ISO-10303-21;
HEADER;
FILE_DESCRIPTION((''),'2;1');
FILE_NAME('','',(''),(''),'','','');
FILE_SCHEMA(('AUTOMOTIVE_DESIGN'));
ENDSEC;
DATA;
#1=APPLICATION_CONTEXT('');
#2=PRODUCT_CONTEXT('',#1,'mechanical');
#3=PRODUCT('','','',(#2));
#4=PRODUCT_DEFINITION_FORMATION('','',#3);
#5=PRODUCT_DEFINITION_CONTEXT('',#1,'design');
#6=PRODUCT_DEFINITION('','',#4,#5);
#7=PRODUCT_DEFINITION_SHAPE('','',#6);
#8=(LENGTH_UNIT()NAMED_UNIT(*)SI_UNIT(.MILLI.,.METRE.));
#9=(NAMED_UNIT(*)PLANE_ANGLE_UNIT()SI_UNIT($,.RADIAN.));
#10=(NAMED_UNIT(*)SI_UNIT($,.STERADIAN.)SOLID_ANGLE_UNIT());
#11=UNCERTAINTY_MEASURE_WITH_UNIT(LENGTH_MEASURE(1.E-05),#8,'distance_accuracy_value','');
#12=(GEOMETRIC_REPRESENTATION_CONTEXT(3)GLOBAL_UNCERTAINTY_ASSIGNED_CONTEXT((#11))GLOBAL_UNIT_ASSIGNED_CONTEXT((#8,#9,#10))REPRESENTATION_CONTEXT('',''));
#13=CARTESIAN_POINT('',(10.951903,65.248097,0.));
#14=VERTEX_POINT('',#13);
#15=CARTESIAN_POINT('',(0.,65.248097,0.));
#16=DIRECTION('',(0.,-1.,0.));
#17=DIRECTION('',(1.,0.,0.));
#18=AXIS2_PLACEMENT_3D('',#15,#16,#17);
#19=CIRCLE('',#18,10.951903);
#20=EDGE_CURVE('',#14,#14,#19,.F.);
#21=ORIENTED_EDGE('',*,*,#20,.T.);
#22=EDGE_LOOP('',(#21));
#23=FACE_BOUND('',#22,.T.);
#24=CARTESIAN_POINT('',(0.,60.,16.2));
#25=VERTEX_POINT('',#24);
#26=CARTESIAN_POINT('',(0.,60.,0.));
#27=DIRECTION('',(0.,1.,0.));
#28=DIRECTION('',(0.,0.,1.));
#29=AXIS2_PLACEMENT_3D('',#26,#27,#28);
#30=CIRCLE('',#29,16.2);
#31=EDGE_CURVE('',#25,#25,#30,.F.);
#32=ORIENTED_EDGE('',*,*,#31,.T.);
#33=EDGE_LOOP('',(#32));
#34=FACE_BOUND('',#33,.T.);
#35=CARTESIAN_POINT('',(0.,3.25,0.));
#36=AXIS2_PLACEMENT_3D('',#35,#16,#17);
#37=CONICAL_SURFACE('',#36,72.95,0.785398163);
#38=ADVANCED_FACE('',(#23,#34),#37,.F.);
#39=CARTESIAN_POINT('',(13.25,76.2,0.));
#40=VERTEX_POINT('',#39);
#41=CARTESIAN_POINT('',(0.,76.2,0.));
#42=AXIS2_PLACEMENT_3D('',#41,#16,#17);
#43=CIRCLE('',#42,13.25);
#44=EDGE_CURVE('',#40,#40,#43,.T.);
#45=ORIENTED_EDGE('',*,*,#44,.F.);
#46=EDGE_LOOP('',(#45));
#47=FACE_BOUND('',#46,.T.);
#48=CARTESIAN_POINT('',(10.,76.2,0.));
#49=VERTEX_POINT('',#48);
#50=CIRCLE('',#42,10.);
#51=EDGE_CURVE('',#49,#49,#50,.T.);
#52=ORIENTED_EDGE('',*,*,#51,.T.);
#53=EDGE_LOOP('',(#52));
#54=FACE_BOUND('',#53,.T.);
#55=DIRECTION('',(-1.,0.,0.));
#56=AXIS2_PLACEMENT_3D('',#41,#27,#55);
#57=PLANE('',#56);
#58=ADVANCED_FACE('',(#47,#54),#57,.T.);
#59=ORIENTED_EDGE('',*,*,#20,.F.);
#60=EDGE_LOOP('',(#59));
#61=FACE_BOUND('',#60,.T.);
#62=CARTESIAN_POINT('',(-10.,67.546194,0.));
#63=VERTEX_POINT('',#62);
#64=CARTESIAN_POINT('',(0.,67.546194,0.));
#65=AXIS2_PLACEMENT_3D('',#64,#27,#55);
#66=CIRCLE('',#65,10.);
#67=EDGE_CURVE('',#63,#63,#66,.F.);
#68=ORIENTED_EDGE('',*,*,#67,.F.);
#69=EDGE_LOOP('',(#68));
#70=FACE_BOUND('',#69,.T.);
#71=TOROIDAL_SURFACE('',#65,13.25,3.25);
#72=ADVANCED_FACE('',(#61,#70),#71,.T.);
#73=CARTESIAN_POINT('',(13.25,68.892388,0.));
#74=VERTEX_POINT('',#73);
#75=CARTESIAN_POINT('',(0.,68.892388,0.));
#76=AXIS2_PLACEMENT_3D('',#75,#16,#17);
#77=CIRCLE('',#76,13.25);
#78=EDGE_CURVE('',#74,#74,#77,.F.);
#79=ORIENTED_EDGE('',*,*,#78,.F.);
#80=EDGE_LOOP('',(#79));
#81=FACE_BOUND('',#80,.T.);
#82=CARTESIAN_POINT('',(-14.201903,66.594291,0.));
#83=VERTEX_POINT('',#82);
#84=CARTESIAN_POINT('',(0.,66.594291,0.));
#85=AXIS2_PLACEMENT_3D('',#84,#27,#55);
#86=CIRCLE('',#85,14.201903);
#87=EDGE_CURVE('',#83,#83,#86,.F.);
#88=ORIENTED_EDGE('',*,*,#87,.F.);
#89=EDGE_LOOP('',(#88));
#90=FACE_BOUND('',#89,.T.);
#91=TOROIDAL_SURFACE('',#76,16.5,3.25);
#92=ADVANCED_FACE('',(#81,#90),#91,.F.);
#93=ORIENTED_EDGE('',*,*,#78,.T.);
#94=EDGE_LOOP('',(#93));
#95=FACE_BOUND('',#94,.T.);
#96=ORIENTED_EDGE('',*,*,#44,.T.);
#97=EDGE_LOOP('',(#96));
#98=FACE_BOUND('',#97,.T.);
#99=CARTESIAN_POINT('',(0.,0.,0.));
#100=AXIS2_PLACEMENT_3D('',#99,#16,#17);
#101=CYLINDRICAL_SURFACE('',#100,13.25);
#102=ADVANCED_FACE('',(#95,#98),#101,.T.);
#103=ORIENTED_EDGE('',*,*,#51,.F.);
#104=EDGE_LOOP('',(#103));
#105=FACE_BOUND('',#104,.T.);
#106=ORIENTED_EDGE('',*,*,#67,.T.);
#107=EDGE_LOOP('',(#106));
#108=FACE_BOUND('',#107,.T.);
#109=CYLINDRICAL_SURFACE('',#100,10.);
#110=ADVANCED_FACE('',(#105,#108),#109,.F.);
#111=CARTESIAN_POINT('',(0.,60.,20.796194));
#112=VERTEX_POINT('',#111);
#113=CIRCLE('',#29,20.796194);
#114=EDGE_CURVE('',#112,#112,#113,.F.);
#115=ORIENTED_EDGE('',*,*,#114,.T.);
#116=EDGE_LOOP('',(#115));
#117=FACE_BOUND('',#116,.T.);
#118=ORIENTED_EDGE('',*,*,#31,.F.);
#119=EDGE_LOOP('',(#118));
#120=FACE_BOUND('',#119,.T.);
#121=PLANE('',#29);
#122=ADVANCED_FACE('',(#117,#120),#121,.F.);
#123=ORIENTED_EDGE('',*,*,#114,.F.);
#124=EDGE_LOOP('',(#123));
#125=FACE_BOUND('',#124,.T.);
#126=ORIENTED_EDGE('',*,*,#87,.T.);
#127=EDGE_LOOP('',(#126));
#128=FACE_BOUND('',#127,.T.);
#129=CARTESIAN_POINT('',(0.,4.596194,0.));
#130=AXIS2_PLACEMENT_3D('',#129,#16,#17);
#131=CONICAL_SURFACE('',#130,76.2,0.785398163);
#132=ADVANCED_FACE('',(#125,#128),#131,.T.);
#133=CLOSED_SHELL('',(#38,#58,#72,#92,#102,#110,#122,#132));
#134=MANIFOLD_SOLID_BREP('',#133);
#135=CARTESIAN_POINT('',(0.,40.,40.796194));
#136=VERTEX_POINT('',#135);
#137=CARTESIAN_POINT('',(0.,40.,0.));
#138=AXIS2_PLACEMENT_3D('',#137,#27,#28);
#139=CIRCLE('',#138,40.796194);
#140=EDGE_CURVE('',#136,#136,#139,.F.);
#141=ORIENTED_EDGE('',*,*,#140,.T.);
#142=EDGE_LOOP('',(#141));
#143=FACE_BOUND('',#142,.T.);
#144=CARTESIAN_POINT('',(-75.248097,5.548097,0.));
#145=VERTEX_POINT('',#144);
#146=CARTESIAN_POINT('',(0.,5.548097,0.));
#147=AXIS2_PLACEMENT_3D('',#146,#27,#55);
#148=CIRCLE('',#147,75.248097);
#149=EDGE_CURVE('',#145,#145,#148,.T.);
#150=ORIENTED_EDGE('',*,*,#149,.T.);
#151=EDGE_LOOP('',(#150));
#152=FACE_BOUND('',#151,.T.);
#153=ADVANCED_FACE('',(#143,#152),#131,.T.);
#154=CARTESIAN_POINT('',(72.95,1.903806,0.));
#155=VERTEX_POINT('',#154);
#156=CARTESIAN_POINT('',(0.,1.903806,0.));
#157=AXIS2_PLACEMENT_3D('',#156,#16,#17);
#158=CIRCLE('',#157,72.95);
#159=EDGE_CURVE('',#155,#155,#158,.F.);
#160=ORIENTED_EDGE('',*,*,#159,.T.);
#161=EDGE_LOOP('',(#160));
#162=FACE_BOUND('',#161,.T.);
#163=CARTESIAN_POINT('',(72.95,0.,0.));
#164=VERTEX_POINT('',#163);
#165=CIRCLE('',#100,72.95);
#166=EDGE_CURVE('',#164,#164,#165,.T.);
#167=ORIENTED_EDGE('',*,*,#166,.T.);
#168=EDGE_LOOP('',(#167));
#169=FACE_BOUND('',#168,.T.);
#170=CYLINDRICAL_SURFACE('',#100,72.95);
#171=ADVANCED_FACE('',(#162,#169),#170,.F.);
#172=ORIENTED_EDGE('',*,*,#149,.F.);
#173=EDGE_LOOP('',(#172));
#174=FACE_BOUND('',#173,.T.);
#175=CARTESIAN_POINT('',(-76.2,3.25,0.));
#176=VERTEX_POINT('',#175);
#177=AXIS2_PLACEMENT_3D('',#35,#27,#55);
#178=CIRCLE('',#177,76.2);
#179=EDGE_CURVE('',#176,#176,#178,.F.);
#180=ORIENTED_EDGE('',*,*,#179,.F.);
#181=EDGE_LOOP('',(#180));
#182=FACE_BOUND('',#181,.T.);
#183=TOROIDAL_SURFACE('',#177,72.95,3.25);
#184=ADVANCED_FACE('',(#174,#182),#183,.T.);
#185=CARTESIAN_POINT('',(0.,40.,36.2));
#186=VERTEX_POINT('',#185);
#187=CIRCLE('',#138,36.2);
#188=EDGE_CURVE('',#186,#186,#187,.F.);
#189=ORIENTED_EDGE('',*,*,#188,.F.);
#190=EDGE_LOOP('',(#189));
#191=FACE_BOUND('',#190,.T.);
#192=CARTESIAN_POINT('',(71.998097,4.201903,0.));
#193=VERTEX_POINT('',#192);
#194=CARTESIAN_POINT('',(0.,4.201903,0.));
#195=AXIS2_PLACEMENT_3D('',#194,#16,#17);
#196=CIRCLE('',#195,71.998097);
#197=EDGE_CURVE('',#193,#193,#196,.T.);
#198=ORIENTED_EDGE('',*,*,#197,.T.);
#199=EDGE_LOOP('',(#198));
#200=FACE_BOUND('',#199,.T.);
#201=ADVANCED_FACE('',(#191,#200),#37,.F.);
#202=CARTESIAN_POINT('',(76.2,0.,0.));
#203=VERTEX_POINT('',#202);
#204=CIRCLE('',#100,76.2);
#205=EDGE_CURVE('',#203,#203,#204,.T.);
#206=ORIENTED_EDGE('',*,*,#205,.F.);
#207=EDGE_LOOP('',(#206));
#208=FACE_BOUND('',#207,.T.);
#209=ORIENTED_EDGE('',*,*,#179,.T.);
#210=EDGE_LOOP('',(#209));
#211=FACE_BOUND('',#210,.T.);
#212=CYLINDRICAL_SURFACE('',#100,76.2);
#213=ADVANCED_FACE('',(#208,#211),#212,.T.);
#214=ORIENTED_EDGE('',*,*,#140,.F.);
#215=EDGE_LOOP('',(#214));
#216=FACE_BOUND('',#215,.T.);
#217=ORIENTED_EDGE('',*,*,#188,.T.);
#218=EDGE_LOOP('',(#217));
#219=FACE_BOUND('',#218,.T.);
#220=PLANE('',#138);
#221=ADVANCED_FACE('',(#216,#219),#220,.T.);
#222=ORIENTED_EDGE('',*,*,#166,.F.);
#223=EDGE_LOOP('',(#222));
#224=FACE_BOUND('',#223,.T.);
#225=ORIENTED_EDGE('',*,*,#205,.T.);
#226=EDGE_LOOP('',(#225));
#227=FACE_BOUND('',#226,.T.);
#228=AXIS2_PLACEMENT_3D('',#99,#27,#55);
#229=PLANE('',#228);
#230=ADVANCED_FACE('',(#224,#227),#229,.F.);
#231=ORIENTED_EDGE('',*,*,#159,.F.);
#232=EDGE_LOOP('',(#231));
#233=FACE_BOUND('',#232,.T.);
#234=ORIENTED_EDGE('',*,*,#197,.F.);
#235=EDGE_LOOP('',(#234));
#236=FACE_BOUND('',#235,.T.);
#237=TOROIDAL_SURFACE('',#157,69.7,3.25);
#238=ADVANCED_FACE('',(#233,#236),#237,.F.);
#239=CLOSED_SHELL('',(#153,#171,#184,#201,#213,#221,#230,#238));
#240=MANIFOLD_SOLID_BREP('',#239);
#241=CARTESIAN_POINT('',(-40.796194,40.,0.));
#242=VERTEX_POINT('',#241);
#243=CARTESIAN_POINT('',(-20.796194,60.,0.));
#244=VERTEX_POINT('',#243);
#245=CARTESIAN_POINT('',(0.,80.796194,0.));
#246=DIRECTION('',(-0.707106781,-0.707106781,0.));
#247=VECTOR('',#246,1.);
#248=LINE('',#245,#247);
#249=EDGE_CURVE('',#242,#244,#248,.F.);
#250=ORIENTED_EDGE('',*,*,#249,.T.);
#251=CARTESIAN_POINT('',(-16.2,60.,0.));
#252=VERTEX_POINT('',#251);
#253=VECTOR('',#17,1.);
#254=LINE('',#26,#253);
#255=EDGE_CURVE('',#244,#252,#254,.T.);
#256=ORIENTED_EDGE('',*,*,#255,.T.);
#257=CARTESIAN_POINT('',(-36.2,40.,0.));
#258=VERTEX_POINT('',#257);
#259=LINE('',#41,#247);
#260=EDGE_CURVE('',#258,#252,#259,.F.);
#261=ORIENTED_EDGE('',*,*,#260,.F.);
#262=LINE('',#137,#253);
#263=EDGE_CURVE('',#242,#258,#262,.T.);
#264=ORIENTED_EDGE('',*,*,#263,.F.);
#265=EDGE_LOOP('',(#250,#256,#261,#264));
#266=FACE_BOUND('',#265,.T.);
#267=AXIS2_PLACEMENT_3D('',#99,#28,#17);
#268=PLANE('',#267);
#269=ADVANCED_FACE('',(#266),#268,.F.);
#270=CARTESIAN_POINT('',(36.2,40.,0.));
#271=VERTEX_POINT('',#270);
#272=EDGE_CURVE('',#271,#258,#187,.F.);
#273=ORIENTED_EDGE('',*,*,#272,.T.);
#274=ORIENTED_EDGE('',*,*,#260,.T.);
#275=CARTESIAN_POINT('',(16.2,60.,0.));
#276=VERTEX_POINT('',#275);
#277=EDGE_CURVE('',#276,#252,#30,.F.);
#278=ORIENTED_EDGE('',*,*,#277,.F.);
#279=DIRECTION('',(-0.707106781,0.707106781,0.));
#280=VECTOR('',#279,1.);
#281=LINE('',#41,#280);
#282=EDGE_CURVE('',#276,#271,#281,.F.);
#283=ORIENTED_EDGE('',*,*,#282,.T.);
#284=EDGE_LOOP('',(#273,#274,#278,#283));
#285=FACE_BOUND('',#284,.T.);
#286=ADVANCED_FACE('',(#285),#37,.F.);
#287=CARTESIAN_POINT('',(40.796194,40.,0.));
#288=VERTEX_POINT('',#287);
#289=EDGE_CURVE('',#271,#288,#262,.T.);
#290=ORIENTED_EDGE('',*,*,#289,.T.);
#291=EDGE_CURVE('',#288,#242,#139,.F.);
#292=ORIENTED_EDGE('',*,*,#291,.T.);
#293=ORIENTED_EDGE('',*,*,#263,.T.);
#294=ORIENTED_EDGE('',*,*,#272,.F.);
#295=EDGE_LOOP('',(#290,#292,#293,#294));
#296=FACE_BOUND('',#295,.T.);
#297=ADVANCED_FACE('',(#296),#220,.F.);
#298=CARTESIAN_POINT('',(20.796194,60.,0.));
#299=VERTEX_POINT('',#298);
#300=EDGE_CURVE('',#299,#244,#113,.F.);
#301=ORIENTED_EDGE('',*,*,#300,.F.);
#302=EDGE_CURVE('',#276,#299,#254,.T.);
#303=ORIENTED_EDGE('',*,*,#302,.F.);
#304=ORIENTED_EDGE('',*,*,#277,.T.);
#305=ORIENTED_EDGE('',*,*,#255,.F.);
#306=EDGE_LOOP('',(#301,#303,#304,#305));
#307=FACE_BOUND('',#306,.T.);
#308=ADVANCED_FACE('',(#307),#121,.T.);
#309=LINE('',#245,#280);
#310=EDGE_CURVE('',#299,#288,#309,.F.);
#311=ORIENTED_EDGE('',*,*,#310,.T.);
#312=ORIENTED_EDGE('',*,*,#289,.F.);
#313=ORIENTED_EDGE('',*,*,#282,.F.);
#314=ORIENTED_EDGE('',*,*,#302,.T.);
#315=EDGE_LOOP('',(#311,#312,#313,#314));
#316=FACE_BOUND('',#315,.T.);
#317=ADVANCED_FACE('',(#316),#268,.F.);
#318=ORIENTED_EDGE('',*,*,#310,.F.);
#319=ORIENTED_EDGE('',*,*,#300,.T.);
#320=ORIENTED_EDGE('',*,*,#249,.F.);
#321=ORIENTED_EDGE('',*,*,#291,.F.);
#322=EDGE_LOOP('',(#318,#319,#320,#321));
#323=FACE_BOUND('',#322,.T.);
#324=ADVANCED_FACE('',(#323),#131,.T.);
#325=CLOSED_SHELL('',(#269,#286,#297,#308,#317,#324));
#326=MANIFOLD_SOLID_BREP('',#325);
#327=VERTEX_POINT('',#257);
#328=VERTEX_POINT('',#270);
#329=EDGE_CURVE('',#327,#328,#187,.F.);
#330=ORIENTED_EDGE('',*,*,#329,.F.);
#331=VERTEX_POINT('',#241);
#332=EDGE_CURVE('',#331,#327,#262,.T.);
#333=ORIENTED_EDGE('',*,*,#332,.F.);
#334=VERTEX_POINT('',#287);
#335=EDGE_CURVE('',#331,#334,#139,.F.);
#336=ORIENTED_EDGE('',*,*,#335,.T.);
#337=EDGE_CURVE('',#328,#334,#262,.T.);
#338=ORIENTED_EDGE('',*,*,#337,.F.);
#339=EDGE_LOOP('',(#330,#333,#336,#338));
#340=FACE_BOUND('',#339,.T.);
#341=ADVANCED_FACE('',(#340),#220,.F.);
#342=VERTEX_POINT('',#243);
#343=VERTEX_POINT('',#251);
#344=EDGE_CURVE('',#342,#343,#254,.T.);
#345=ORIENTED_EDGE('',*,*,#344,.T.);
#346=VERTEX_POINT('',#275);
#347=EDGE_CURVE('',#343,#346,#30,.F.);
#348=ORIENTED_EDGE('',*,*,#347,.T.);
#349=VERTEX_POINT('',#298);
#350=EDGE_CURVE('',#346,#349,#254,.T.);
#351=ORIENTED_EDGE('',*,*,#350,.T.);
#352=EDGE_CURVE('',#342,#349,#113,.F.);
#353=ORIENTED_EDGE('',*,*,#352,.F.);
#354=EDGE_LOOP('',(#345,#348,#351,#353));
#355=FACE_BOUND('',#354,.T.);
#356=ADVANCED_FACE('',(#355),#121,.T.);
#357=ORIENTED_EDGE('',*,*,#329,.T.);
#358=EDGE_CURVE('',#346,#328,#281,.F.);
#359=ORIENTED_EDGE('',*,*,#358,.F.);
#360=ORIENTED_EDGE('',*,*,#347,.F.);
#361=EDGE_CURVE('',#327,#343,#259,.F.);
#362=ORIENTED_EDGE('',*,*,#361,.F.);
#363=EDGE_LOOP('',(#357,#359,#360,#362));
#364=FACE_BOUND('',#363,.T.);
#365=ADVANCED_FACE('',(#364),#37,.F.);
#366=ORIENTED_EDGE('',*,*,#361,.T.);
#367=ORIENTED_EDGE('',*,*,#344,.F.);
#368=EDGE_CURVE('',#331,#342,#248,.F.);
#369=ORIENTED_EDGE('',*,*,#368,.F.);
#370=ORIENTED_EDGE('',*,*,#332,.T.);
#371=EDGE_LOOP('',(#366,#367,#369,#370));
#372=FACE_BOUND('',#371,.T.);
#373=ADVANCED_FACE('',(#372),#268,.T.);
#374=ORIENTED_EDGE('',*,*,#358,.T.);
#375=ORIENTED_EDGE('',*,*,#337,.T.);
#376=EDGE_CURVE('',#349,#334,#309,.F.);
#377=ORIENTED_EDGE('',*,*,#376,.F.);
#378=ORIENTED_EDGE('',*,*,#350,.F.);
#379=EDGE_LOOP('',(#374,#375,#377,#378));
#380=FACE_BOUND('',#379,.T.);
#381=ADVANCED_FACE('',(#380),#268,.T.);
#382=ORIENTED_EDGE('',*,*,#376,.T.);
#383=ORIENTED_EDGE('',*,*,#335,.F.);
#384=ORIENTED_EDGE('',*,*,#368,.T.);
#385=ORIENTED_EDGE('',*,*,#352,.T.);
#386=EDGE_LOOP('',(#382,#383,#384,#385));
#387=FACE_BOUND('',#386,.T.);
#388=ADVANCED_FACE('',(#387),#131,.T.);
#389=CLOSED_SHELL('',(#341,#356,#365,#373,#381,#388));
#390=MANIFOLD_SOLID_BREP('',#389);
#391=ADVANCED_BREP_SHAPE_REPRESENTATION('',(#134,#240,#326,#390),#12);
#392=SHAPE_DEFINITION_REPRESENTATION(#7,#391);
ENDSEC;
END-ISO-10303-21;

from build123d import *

# Parameters (mm, degrees)
FILLET1_R = 3.25
FILLET2_R = 3.25
FILLET3_R = 3.25
FILLET4_R = 3.25


# Read off the part's stored shape, not the designer's step: Split2, Split3
with BuildPart() as part:
    # Sketch2 → Revolve1 (revolve)
    with BuildSketch(Plane.XY, mode=Mode.PRIVATE) as revolve1_sk:
        Polygon((-76.2, 4.596194078), (-76.2, 0), (-72.95, 0), (-72.95, 3.25), (-10, 66.2), (-10, 70.796194078), (-10, 76.2), (-13.25, 76.2), (-13.25, 67.546194078), align=None)
    revolve(revolve1_sk.sketch.rotate(Axis((0, 0, 0), (0, 1, 0)), 180), axis=Axis((0, 0, 0), (0, 1, 0)))

    # Fillet1
    fillet1_edges = [part.edges().sort_by_distance(p)[0] for p in [
        (-76.2, 4.596194078, 0),
    ]]
    fillet(fillet1_edges, radius=FILLET1_R)

    # Fillet2
    fillet2_edges = [part.edges().sort_by_distance(p)[0] for p in [
        (-72.95, 3.25, 0),
    ]]
    fillet(fillet2_edges, radius=FILLET2_R)

    # Fillet3
    fillet3_edges = [part.edges().sort_by_distance(p)[0] for p in [
        (-13.25, 67.546194078, 0),
    ]]
    fillet(fillet3_edges, radius=FILLET3_R)

    # Fillet4
    fillet4_edges = [part.edges().sort_by_distance(p)[0] for p in [
        (-10, 66.2, 0),
    ]]
    fillet(fillet4_edges, radius=FILLET4_R)


with BuildPart() as body_2:
    # Split1: the piece on the far side of the plane
    add(part.part)
    split(bisect_by=Plane.ZX.offset(40), keep=Keep.BOTTOM)


with BuildPart() as part_1:
    add(part.part)

    # Split1
    split(bisect_by=Plane.ZX.offset(40), keep=Keep.TOP)


with BuildPart() as body_3:
    # Split2: the piece on the far side of the plane
    add(part_1.part)
    split(bisect_by=Plane(origin=(0, 60, 0), x_dir=(1, 0, 0), z_dir=(0, 1, 0)), keep=Keep.BOTTOM)


with BuildPart() as part_2:
    add(part_1.part)

    # Split2
    split(bisect_by=Plane(origin=(0, 60, 0), x_dir=(1, 0, 0), z_dir=(0, 1, 0)), keep=Keep.TOP)


with BuildPart() as body_4:
    # Split3: the piece on the far side of the plane
    add(body_3.part)
    split(bisect_by=Plane.XY, keep=Keep.BOTTOM)


with BuildPart() as body_3_1:
    add(body_3.part)

    # Split3
    split(bisect_by=Plane.XY, keep=Keep.TOP)


solid = Compound([body_2.part, part_2.part, body_4.part, body_3_1.part])
